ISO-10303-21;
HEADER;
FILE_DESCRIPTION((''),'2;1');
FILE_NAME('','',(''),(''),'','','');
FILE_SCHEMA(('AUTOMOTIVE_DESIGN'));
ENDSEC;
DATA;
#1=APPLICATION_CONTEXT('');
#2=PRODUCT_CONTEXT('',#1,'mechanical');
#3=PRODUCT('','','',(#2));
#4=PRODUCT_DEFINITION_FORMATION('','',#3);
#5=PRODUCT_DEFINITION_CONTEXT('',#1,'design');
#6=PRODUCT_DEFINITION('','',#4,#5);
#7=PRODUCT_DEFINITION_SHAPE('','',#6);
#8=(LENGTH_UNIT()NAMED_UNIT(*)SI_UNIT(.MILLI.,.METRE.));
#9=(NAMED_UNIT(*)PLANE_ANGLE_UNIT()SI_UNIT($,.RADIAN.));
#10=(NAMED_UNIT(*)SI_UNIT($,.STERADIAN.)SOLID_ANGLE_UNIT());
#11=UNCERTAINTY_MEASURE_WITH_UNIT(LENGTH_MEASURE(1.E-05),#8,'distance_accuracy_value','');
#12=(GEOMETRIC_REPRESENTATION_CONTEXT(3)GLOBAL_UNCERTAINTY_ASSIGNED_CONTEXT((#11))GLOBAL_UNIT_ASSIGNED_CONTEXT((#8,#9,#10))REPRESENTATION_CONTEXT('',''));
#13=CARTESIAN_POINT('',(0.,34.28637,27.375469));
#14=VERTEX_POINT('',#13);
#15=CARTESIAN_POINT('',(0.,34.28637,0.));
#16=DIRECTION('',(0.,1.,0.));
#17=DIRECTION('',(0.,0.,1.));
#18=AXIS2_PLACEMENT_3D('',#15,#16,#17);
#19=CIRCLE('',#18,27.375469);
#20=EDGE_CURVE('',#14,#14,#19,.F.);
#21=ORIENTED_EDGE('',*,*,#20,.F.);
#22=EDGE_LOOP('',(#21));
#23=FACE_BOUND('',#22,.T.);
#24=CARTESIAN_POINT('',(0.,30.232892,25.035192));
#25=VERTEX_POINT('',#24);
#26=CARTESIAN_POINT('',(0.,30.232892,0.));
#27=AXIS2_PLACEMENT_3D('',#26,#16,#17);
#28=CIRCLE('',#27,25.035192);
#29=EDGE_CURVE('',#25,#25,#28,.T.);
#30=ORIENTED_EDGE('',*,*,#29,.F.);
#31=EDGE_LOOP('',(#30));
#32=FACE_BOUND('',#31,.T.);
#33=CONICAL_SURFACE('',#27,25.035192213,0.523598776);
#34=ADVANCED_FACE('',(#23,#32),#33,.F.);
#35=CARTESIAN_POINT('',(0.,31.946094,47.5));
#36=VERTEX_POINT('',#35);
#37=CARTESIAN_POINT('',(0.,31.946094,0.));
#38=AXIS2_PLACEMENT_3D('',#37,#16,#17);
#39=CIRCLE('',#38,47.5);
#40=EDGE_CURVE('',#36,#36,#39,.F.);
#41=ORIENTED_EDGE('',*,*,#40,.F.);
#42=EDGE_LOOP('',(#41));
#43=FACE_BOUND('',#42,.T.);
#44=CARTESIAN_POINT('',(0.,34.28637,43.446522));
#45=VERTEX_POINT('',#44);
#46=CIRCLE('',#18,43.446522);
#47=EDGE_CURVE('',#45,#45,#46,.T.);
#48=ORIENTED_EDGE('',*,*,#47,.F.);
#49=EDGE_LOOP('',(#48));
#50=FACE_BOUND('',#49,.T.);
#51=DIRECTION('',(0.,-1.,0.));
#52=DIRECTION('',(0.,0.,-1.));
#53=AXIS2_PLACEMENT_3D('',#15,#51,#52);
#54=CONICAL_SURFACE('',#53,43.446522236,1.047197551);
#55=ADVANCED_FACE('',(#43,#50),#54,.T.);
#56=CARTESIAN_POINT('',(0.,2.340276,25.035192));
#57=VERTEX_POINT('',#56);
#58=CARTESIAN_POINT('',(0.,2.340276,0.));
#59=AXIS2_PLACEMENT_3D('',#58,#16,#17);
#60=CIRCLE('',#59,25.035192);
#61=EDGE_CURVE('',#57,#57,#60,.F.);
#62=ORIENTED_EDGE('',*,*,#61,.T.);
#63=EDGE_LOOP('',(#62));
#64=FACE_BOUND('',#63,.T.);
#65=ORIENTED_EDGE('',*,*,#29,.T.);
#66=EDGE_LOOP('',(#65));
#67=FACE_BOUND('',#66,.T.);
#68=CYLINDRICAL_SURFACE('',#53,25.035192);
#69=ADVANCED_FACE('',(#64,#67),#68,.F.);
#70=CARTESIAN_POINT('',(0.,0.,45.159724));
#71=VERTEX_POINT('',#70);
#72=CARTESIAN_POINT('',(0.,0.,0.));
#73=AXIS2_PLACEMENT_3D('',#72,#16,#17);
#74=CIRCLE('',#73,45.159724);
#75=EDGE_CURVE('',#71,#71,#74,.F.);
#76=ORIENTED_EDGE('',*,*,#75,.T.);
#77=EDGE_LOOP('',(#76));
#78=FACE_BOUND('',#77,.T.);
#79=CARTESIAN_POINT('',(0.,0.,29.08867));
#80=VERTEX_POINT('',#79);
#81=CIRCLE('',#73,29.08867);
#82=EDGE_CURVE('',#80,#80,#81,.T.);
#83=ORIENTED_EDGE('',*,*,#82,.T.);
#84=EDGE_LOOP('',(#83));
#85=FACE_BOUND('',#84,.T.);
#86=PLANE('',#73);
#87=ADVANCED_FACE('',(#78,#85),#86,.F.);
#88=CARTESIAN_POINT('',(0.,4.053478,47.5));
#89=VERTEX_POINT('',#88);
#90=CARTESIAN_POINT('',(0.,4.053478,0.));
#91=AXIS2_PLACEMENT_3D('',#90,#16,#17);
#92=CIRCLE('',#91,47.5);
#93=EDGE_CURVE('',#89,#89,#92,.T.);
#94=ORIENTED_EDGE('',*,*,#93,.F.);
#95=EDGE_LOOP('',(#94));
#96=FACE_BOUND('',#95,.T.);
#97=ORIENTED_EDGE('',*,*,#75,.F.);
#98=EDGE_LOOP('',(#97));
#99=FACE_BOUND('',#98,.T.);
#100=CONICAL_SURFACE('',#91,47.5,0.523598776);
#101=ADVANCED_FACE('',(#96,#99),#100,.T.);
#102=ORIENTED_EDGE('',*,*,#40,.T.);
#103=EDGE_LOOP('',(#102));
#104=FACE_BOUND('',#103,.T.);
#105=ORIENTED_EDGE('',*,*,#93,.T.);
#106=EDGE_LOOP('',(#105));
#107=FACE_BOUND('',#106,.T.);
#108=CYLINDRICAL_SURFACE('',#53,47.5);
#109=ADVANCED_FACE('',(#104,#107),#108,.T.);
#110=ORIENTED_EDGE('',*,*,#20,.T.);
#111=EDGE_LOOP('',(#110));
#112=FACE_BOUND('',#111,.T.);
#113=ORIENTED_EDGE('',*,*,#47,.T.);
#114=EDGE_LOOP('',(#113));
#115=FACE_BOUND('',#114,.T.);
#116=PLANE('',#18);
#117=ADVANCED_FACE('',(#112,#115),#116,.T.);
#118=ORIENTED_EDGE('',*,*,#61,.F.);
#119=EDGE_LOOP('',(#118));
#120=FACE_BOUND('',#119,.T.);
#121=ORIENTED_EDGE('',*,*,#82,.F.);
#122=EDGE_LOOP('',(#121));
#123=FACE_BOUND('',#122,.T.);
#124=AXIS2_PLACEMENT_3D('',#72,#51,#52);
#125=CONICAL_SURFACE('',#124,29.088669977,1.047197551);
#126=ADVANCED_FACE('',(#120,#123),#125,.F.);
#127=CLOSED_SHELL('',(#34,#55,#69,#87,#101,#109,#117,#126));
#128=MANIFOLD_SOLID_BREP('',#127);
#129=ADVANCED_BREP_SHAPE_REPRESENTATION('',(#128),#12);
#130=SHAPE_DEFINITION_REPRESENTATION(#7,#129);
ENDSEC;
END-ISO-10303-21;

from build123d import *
from OCP.BRepFilletAPI import BRepFilletAPI_MakeChamfer

# Parameters (mm, degrees)
SKETCH1_R           = 47.5
BOSS_EXTRUDE1_DEPTH = 34.286370078
SKETCH2_R           = 25.035192213
CUT_EXTRUDE1_DEPTH  = 76.419196317
CHAMFER1_SIZE       = 2.340276478
CHAMFER1_SIZE2      = 4.053477764


with BuildPart() as part:
    # Sketch1 → Boss-Extrude1 (new body)
    with BuildSketch(Plane(origin=(0, 0, 0), x_dir=(1, 0, 0), z_dir=(0, 1, 0))):
        Circle(SKETCH1_R)
    extrude(amount=BOSS_EXTRUDE1_DEPTH)

    # Sketch2 → Cut-Extrude1 (cut, through all)
    with BuildSketch(Plane(origin=(0, 0, 0), x_dir=(1, 0, 0), z_dir=(0, 1, 0))):
        Circle(SKETCH2_R)
    extrude(amount=CUT_EXTRUDE1_DEPTH, mode=Mode.SUBTRACT)

    # Chamfer1: one chamfer whose edges measure the first distance from different faces: ONE call of the kernel's chamfer builder (chamfer() names one face for all edges)
    chamfer1_edges_1 = [part.edges().sort_by_distance(p)[0] for p in [
        (-25.035192213, 34.286370078, 0),
    ]]
    chamfer1_side_1 = [part.faces().sort_by_distance(p)[0] for p in [
        (-46.156497116, 34.286370078, 0),
    ]]
    chamfer1_edges_2 = [part.edges().sort_by_distance(p)[0] for p in [
        (-25.035192213, 0, 0),
    ]]
    chamfer1_side_2 = [part.faces().sort_by_distance(p)[0] for p in [
        (-25.035192213, 17.143185039, 0),
    ]]
    chamfer1_edges_3 = [part.edges().sort_by_distance(p)[0] for p in [
        (-47.5, 0, 0),
    ]]
    chamfer1_side_3 = [part.faces().sort_by_distance(p)[0] for p in [
        (-46.156497116, 0, 0),
    ]]
    chamfer1_edges_4 = [part.edges().sort_by_distance(p)[0] for p in [
        (-47.5, 34.286370078, 0),
    ]]
    chamfer1_side_4 = [part.faces().sort_by_distance(p)[0] for p in [
        (-47.5, 17.143185039, 0),
    ]]
    chamfer1 = BRepFilletAPI_MakeChamfer(part.part.solid().wrapped)
    for e in chamfer1_edges_1:
        chamfer1.Add(CHAMFER1_SIZE, CHAMFER1_SIZE2, e.wrapped, chamfer1_side_1[0].wrapped)  # the first distance lies on this face
    for e in chamfer1_edges_2:
        chamfer1.Add(CHAMFER1_SIZE, CHAMFER1_SIZE2, e.wrapped, chamfer1_side_2[0].wrapped)  # the first distance lies on this face
    for e in chamfer1_edges_3:
        chamfer1.Add(CHAMFER1_SIZE, CHAMFER1_SIZE2, e.wrapped, chamfer1_side_3[0].wrapped)  # the first distance lies on this face
    for e in chamfer1_edges_4:
        chamfer1.Add(CHAMFER1_SIZE, CHAMFER1_SIZE2, e.wrapped, chamfer1_side_4[0].wrapped)  # the first distance lies on this face
    add(Compound.cast(chamfer1.Shape()), mode=Mode.REPLACE)


solid = part.part
